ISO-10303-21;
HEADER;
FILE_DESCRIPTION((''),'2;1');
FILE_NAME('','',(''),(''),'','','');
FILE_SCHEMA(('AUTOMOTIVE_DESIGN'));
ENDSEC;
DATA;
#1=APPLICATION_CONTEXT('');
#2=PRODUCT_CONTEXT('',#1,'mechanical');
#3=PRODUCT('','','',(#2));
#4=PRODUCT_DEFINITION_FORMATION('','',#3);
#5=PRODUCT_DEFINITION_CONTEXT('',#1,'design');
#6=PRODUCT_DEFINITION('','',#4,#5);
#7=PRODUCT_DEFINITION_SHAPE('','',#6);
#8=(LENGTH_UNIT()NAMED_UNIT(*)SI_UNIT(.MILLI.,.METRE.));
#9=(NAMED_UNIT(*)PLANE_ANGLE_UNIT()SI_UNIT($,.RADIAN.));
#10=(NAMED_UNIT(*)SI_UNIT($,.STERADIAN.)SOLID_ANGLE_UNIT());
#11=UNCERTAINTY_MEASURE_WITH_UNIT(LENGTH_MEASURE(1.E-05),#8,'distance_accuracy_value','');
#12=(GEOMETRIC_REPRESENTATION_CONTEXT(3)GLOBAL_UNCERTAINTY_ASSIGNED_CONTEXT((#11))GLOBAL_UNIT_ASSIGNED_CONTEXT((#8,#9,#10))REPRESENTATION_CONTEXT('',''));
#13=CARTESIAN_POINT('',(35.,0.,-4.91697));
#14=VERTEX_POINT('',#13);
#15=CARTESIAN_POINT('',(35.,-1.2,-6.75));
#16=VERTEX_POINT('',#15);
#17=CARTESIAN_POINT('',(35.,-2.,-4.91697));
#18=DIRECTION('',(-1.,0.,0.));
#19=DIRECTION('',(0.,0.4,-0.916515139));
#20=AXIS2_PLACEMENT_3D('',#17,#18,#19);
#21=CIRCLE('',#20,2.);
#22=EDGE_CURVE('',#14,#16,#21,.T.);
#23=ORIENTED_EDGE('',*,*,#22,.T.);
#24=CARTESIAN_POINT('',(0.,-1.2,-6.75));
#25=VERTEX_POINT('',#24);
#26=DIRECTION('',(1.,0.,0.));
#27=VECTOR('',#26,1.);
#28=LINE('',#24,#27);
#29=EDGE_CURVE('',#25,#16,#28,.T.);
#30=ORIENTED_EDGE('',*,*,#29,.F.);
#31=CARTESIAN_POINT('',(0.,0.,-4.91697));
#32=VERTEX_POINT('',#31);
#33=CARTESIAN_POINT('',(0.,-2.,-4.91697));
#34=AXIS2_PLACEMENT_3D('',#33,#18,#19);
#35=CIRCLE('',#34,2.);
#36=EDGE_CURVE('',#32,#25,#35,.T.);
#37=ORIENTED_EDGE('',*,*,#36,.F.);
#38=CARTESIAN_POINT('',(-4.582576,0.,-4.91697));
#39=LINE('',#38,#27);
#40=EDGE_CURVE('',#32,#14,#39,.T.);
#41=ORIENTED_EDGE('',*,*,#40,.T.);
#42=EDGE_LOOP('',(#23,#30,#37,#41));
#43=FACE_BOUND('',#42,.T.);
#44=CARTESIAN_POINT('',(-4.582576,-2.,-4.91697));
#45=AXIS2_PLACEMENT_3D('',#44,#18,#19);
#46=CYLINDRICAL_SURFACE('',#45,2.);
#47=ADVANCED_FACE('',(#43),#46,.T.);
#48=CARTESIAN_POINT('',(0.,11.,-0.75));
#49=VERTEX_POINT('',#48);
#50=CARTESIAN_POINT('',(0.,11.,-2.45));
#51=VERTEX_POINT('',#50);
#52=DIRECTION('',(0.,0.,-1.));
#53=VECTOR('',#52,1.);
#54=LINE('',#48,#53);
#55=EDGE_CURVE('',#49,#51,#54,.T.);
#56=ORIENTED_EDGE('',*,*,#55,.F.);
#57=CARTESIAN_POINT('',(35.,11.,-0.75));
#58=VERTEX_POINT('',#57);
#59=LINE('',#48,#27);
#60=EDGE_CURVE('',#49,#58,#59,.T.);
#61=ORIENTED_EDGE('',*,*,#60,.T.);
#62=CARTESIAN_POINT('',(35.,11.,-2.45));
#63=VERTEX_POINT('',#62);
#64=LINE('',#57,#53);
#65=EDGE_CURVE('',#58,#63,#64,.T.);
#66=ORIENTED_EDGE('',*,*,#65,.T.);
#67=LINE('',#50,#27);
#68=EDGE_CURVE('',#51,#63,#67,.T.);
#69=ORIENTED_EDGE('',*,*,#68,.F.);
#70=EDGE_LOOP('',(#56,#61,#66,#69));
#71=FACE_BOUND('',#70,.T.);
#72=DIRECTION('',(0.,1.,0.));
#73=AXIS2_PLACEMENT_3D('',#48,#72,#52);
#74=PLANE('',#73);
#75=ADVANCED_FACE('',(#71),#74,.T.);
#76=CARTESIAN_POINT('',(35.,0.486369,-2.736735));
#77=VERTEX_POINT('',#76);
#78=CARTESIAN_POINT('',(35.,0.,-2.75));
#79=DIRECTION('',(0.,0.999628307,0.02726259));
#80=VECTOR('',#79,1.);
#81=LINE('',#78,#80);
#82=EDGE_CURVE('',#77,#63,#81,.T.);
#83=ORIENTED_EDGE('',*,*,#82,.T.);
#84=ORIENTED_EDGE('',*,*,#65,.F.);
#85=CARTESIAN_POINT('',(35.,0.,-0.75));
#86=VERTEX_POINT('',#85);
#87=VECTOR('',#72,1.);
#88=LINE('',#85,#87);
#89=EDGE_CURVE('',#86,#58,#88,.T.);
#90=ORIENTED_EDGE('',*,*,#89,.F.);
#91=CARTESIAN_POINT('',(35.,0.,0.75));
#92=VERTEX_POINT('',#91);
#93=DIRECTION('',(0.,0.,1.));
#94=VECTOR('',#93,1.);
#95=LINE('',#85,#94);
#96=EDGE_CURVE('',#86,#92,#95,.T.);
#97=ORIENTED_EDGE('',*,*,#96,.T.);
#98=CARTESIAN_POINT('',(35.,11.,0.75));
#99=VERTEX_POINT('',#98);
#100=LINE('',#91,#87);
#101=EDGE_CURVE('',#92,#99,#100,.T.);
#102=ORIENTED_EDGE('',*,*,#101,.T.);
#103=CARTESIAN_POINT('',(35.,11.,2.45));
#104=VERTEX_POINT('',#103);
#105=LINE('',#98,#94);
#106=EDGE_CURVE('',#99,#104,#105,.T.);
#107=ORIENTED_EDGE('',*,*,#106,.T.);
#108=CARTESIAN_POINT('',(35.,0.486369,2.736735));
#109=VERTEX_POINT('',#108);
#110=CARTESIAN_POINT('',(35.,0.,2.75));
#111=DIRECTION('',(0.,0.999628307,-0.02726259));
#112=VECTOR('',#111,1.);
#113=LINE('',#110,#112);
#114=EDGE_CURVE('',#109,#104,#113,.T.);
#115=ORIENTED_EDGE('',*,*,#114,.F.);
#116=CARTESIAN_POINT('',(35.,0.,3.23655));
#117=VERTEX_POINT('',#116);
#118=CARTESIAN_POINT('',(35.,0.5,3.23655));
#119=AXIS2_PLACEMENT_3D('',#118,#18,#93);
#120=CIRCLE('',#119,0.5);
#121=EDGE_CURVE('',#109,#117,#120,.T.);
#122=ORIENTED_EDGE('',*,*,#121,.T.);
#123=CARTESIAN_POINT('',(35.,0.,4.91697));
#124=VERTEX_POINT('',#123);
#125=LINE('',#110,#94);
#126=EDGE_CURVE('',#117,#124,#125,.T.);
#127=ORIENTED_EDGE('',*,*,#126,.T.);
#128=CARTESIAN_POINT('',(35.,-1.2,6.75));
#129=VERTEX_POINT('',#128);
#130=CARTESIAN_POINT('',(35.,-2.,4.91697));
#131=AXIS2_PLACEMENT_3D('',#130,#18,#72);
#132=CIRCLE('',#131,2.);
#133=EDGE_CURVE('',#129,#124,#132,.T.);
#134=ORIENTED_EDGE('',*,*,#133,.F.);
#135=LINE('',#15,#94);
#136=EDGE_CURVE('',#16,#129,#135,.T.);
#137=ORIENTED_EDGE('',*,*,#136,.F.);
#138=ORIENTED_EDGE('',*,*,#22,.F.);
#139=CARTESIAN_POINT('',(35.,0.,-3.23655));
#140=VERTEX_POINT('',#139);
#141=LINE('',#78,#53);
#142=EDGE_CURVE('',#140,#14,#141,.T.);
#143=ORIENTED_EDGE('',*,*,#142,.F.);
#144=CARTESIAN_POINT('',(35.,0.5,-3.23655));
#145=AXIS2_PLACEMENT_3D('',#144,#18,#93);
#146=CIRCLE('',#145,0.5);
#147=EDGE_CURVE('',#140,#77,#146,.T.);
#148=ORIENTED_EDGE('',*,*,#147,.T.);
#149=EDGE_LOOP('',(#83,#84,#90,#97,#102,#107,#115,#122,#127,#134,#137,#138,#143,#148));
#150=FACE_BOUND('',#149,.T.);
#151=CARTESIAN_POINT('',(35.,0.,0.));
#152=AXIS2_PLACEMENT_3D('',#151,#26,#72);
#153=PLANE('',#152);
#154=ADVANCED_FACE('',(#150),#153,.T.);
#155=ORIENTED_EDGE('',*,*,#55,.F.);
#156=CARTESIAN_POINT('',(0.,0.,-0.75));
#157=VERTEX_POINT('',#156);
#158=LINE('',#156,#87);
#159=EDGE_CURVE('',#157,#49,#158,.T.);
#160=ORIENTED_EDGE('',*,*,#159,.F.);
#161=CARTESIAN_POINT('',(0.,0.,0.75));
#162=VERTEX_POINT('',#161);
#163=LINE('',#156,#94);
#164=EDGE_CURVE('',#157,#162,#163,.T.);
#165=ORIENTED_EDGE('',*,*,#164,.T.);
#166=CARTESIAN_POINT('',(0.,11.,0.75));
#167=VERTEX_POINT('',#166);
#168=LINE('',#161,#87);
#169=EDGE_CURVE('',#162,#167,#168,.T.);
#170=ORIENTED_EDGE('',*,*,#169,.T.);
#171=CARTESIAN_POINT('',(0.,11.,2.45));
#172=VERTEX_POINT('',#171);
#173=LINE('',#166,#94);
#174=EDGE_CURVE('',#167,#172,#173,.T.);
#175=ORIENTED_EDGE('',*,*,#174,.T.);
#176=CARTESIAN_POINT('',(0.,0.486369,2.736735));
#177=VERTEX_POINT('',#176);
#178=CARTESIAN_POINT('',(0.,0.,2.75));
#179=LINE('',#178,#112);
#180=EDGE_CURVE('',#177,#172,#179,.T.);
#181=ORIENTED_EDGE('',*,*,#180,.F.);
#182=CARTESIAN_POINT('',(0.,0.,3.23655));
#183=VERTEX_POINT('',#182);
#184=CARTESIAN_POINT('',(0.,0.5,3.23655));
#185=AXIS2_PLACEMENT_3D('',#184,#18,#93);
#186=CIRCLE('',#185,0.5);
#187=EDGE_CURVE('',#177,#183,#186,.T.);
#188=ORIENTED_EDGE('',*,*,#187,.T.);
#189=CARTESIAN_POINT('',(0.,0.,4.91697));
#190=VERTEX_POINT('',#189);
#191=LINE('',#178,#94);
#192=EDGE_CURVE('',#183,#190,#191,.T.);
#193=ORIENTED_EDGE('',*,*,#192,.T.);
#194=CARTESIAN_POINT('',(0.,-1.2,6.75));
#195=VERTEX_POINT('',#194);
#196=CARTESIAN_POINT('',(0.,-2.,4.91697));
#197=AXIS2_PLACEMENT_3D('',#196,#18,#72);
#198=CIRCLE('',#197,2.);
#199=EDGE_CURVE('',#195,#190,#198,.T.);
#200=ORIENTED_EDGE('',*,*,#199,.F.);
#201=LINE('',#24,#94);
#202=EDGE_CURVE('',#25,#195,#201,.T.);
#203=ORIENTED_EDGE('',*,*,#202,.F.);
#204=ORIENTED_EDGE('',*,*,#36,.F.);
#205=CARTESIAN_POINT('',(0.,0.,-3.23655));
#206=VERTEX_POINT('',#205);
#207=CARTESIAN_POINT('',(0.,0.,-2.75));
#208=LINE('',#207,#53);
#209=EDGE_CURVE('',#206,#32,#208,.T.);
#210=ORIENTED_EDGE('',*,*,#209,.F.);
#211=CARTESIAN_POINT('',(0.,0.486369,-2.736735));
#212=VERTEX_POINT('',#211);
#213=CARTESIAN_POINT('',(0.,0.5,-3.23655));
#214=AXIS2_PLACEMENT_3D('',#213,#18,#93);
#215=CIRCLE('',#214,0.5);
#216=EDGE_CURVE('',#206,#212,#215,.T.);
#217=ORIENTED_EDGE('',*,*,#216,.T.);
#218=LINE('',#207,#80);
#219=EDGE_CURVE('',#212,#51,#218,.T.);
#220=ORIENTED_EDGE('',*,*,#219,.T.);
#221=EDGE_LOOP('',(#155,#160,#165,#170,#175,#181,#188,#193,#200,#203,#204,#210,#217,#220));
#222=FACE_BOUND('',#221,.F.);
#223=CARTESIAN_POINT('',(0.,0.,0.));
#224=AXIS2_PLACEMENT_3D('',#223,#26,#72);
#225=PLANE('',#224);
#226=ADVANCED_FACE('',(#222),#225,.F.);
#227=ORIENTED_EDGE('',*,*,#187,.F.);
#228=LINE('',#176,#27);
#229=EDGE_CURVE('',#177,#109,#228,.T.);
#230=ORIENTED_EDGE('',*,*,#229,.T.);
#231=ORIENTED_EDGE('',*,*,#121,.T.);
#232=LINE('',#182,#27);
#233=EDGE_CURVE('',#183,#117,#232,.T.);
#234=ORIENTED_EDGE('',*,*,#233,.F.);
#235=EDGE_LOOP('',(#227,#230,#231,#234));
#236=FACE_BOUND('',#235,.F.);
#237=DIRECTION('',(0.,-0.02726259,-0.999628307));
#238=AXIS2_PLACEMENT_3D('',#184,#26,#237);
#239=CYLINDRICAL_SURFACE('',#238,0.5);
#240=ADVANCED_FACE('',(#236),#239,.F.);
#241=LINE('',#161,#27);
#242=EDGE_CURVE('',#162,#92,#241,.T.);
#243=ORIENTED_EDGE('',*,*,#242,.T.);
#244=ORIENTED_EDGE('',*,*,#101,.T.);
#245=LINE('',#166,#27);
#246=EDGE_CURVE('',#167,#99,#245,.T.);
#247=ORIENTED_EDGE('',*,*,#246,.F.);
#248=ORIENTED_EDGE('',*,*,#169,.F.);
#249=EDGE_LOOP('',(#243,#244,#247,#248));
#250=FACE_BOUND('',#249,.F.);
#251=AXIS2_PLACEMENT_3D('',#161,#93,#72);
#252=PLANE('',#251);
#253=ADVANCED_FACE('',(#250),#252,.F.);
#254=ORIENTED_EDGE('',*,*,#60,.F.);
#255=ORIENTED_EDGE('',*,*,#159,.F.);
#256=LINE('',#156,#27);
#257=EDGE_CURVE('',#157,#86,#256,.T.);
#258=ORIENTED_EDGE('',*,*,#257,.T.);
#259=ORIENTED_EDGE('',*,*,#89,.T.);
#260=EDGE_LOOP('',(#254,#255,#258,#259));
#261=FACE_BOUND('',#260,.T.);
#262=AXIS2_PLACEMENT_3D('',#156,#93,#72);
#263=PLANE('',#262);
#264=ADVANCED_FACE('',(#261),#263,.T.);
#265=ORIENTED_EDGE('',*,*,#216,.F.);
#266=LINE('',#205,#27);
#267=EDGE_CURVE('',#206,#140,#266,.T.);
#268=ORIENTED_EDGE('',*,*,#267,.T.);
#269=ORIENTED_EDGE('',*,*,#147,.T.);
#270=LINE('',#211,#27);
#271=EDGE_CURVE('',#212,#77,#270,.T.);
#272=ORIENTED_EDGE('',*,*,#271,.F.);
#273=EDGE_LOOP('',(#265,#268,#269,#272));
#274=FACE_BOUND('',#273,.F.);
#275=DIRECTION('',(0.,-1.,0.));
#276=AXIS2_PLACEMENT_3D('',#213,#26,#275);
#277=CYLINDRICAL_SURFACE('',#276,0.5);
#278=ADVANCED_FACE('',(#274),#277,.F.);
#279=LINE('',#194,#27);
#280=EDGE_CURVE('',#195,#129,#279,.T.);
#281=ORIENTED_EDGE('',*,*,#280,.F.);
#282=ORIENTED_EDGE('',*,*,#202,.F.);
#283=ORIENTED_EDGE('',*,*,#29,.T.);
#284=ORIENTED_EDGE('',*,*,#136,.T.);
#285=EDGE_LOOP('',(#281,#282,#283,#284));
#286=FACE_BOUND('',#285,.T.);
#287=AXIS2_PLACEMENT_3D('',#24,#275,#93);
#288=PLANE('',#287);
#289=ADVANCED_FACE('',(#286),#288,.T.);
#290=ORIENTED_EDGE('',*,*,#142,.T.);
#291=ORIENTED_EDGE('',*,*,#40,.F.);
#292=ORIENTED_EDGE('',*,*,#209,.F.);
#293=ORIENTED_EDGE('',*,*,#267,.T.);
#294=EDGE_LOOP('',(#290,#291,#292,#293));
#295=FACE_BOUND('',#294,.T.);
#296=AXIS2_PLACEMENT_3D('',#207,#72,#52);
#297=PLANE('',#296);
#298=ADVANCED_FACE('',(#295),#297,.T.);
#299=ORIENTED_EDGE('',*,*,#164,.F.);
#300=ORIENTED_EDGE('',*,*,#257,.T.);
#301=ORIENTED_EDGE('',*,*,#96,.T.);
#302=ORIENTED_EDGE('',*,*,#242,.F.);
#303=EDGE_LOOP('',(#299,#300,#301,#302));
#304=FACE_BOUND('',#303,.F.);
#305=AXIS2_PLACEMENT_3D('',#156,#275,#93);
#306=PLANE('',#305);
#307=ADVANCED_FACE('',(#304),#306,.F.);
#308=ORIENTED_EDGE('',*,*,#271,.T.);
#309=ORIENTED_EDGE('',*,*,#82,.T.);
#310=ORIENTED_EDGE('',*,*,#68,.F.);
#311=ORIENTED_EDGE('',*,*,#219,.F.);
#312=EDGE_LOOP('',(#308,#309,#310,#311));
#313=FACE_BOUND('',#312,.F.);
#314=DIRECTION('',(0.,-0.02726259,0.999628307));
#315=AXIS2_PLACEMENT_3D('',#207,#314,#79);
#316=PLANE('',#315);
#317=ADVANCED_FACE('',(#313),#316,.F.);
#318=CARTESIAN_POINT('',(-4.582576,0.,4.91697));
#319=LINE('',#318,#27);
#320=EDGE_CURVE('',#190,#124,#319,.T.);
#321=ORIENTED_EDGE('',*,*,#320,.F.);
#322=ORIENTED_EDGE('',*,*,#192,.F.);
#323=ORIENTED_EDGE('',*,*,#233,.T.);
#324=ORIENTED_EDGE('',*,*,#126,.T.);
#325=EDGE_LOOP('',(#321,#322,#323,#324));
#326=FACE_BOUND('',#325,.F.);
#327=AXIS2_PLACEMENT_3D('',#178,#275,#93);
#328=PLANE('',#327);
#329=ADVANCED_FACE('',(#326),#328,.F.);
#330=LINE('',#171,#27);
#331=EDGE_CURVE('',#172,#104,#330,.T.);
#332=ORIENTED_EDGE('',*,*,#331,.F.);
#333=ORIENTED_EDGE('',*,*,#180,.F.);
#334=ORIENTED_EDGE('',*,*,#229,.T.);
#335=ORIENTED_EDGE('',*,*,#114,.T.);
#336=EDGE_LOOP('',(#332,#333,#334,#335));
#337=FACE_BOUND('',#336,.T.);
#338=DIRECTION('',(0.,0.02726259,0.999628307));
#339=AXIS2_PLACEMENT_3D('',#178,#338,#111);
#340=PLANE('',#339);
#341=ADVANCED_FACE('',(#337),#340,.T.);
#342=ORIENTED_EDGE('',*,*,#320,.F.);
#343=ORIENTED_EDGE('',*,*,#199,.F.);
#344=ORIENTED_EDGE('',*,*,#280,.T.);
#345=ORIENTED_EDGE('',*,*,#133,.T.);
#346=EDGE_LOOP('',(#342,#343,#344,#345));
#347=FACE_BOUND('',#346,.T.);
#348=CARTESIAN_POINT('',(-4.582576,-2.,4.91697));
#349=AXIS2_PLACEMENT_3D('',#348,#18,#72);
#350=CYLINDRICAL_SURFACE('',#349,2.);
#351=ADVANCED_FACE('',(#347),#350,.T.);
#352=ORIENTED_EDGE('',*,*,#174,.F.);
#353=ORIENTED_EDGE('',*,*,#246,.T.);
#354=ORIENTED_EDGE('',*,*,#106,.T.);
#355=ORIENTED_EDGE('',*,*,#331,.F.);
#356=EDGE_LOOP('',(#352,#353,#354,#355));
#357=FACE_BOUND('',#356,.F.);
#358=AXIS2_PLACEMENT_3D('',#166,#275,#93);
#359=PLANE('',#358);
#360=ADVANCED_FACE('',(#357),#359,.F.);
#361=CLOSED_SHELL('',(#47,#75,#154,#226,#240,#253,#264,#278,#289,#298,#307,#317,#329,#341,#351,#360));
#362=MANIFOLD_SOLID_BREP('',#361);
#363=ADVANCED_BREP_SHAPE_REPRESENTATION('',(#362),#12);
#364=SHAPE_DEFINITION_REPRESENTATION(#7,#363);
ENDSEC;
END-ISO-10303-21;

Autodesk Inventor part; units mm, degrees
ref_plane "YZ Plane" through (0, 0, 0) normal (1, 0, 0) x (0, 1, 0)
ref_plane "XZ Plane" through (0, 0, 0) normal (0, 1, 0) x (-1, 0, 0)
ref_plane "XY Plane" through (0, 0, 0) normal (0, 0, 1) x (1, 0, 0)
sketch "Sketch1" plane through (0, 0, 0) normal (1, 0, 0) x (0, 1, 0)
  line L0 (0, 0) -> (0, -0.75) construction
  line L1 (0, 0) -> (0, 0.75) construction
  line L2 (0, 0.75) -> (11, 0.75)
  line L3 (11, 0.75) -> (11, 2.45)
  line L4 (0, -0.75) -> (11, -0.75)
  line L5 (11, -0.75) -> (11, -2.45)
  line L6 (0, 0.75) -> (0, 2.75)
  line L7 (0, 2.75) -> (11, 2.45)
  line L8 (0, -0.75) -> (0, -2.75)
  line L9 (0, -2.75) -> (11, -2.45)
  line L10 (0, -0.75) -> (0, 0.75)
  line L11 (0, 2.75) -> (0, 6.75)
  line L12 (0, -2.75) -> (0, -6.75)
  line L13 (0, -2.75) -> (4, -2.75) construction
  line L14 (0, -6.75) -> (-1.2, -6.75)
  line L15 (-1.2, -6.75) -> (-1.2, 6.75)
  line L16 (-1.2, 6.75) -> (0, 6.75)
  dimension "d0" = 0.75
  dimension "d1" = 0.75
  dimension "d2" = 11
  dimension "d3" = 1.7
  dimension "d4" = 11
  dimension "d5" = 1.7
  dimension "d6" = 2
  dimension "d7" = 2
  dimension "d8" = 4
  dimension "d9" = 4
  dimension "d10" = 90
  dimension "d11" = 1.2
extrude "Extrusion1" add sketch "Sketch1" along normal blind 35
fillet "Fillet1" radius 0.5 2 edges at (17.5, 0, 2.75) (17.5, 0, -2.75)
fillet "Fillet2" radius 2 2 edges at (17.5, 0, 6.75) (17.5, 0, -6.75)
properties part number "cleat bracket v2"
